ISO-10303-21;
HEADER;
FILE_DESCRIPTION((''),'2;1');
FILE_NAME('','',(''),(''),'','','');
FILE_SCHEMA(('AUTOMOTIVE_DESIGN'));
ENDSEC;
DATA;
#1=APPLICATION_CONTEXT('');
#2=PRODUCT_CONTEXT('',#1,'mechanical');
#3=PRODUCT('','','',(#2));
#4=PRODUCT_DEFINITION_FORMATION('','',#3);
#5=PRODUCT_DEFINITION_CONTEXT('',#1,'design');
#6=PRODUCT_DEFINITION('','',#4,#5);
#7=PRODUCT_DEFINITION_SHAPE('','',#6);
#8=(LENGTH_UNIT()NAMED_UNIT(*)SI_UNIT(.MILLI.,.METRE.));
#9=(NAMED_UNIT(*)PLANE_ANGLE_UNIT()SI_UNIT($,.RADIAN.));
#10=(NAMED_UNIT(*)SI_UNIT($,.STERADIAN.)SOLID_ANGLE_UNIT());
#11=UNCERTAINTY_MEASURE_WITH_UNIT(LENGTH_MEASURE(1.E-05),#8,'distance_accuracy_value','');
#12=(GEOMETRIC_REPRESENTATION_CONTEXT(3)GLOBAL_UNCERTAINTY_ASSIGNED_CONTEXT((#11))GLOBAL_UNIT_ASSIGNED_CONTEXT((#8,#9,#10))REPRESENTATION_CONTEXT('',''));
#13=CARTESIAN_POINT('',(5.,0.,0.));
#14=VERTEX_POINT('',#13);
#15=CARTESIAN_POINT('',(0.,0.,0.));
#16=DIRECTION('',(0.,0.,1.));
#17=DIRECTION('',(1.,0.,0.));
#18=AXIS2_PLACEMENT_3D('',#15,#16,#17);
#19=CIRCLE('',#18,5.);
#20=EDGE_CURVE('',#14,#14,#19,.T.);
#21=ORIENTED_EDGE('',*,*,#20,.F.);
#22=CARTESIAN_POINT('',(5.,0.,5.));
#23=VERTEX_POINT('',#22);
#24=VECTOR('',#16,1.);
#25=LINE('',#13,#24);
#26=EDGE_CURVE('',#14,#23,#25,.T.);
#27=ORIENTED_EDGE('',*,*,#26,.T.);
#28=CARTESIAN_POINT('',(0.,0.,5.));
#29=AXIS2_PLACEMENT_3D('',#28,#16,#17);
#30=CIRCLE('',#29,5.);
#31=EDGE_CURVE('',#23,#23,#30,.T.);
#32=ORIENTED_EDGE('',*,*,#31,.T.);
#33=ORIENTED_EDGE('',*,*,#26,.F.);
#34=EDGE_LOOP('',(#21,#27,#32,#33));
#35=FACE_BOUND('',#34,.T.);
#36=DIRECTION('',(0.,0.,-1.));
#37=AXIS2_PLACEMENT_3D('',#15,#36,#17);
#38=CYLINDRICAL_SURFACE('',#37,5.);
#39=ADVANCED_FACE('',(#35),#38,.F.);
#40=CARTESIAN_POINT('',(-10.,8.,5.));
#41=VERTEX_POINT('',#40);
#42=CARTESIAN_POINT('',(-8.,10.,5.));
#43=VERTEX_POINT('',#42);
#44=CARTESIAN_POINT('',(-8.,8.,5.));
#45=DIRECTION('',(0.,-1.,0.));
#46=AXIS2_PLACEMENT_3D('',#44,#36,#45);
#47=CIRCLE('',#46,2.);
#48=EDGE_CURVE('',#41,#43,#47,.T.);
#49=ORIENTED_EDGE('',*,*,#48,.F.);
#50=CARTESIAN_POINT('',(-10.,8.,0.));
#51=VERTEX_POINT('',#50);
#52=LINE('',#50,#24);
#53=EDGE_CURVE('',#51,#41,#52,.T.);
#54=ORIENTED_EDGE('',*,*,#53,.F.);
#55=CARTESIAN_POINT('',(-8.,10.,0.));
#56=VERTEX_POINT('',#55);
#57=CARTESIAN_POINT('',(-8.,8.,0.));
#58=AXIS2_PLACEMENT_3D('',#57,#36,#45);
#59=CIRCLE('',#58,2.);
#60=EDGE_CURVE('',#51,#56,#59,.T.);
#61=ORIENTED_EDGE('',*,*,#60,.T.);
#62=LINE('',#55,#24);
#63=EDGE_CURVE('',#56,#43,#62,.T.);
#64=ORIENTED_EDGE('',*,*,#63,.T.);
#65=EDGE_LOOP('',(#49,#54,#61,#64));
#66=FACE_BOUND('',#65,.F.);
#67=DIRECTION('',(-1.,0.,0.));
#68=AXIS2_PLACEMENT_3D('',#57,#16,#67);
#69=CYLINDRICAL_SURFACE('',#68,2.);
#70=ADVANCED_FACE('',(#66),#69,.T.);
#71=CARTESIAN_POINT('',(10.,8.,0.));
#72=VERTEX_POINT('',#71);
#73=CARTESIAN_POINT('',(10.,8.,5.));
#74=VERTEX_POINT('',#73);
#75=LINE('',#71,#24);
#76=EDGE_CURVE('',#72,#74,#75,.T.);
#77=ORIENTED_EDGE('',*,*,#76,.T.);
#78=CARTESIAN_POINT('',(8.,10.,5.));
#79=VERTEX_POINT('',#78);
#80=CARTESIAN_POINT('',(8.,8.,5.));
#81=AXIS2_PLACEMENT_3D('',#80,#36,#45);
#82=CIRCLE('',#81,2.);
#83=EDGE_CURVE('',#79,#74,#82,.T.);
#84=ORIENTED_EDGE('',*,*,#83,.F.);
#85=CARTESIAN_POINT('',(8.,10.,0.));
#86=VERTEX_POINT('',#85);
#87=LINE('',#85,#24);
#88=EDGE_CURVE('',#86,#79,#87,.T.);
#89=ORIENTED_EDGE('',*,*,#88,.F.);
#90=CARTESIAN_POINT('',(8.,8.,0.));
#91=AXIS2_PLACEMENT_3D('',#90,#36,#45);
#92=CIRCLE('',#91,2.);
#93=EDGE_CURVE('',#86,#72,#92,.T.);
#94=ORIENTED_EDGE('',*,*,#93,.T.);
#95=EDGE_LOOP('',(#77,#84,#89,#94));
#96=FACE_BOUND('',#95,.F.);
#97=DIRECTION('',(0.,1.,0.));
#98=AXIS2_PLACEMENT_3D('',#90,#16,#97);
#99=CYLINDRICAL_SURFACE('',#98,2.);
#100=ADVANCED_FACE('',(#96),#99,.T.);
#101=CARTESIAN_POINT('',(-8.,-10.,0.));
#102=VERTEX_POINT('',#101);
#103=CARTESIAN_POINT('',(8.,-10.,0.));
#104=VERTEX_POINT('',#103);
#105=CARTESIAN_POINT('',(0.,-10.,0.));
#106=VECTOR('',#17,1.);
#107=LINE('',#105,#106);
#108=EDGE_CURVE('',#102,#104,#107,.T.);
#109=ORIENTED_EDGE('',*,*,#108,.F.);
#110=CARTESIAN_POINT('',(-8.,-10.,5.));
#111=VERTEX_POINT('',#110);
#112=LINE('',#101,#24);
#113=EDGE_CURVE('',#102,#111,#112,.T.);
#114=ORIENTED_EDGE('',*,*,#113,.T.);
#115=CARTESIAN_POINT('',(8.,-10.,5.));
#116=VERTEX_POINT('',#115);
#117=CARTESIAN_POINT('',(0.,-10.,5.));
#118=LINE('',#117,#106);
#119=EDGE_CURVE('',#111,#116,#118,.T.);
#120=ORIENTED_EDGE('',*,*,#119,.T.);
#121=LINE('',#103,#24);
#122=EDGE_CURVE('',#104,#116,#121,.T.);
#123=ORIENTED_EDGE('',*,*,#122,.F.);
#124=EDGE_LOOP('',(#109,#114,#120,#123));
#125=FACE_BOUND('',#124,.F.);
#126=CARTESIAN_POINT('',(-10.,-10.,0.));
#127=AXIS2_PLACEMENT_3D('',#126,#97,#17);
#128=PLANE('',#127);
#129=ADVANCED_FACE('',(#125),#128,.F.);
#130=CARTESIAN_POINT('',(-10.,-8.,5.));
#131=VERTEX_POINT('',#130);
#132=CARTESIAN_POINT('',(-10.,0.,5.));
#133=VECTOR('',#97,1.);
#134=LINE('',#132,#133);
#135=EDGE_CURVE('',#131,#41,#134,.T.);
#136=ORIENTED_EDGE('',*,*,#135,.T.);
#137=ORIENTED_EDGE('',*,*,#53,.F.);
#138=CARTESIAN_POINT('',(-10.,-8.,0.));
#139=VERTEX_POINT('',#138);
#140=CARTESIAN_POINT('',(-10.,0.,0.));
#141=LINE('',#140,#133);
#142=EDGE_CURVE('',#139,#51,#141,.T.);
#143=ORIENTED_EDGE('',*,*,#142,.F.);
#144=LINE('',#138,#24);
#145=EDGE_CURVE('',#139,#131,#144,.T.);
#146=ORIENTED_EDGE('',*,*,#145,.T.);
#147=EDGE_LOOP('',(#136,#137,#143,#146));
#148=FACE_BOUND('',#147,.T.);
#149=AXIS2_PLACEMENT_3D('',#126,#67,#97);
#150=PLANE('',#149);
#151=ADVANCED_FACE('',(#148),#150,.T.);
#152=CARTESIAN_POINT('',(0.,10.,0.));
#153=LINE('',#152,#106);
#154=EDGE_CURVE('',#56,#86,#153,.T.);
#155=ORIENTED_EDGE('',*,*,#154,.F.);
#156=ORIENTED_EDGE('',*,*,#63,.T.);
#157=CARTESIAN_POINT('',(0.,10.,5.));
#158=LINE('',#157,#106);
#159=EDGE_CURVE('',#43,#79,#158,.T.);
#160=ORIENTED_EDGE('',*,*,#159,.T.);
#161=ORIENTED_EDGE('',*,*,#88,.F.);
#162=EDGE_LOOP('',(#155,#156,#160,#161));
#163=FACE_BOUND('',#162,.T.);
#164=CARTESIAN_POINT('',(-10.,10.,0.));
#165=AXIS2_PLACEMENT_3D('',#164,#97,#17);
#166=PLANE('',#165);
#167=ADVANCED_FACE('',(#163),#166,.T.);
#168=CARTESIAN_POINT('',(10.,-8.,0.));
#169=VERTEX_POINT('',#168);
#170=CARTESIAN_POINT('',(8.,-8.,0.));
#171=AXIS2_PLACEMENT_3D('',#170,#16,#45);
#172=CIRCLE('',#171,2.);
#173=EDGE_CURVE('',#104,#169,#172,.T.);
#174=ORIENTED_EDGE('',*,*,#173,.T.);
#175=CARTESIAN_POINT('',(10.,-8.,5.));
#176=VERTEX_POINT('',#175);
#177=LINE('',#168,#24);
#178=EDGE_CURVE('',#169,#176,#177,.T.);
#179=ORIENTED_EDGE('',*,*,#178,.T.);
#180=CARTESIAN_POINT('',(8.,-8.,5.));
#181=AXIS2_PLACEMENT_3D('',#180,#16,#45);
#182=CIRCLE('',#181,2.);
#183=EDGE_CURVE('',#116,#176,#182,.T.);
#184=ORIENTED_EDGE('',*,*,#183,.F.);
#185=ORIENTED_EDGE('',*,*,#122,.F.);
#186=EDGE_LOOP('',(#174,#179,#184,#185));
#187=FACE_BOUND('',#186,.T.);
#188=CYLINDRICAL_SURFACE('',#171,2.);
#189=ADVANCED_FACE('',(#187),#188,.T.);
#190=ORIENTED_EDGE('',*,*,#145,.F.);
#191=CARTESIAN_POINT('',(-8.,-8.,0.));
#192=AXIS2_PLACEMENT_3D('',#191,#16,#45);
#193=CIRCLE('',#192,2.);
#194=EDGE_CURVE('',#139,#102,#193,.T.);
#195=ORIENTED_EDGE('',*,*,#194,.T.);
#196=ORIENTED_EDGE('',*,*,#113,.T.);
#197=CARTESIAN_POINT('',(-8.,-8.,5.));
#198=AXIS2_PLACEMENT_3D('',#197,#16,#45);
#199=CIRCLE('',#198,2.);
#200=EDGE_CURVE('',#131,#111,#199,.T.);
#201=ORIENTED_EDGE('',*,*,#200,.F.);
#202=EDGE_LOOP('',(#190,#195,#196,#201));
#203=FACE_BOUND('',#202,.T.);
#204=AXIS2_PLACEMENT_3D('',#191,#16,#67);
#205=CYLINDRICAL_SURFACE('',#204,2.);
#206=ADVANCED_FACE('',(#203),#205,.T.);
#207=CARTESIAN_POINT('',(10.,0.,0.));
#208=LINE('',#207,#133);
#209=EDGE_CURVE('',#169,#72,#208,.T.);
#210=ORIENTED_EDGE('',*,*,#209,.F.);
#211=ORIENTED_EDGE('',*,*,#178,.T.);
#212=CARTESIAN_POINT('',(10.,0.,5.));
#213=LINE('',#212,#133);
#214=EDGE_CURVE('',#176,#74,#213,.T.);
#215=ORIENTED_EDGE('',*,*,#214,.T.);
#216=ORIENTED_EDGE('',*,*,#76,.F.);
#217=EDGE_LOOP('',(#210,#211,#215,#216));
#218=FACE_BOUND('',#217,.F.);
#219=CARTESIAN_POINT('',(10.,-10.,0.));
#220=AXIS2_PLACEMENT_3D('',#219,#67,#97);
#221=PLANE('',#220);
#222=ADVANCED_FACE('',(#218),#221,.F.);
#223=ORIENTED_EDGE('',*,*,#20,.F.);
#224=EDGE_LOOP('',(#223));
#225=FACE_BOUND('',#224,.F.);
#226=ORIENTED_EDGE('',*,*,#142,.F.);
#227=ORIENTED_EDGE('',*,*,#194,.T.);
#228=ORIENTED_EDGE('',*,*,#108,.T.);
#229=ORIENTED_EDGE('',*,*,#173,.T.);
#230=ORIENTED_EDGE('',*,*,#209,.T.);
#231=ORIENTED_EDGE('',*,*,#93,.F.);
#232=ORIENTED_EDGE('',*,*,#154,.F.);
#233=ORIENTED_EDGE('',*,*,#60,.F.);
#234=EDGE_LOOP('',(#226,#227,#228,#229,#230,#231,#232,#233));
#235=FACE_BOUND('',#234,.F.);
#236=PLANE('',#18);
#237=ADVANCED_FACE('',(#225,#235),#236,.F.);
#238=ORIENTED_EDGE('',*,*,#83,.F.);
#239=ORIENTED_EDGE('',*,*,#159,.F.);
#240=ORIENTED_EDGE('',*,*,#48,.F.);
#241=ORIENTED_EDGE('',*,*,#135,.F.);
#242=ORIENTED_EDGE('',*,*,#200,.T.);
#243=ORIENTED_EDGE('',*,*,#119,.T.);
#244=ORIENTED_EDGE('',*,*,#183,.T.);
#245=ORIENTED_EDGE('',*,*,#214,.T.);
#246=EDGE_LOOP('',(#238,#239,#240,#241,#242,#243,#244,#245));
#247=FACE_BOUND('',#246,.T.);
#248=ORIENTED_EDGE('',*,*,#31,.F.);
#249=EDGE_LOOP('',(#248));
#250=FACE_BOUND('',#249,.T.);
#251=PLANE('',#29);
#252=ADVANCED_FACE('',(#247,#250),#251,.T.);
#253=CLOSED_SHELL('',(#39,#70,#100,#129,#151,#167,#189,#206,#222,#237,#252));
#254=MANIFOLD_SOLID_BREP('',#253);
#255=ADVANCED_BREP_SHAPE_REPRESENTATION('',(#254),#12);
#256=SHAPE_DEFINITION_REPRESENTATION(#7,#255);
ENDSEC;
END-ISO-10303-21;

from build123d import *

# Parameters (mm, degrees)
F0_W     = 20
F0_H     = 20
F0_R     = 5
F1_DEPTH = 5
F2_R     = 2


# Not quite as in the source:
# - a feature of the source that left no trace in its solid (it failed there, or was rolled back) is left out


with BuildPart() as f1:
    # F0 (on Top) → F1 (new body)
    with BuildSketch(Plane.XY):
        Rectangle(F0_W, F0_H)
        Circle(F0_R, mode=Mode.SUBTRACT)
    extrude(amount=F1_DEPTH)

    # F2
    f2_edges = [f1.edges().sort_by_distance(p)[0] for p in [
        (-10, -10, 2.5),
        (10, -10, 2.5),
        (10, 10, 2.5),
        (-10, 10, 2.5),
    ]]
    fillet(f2_edges, radius=F2_R)


solid = f1.part
